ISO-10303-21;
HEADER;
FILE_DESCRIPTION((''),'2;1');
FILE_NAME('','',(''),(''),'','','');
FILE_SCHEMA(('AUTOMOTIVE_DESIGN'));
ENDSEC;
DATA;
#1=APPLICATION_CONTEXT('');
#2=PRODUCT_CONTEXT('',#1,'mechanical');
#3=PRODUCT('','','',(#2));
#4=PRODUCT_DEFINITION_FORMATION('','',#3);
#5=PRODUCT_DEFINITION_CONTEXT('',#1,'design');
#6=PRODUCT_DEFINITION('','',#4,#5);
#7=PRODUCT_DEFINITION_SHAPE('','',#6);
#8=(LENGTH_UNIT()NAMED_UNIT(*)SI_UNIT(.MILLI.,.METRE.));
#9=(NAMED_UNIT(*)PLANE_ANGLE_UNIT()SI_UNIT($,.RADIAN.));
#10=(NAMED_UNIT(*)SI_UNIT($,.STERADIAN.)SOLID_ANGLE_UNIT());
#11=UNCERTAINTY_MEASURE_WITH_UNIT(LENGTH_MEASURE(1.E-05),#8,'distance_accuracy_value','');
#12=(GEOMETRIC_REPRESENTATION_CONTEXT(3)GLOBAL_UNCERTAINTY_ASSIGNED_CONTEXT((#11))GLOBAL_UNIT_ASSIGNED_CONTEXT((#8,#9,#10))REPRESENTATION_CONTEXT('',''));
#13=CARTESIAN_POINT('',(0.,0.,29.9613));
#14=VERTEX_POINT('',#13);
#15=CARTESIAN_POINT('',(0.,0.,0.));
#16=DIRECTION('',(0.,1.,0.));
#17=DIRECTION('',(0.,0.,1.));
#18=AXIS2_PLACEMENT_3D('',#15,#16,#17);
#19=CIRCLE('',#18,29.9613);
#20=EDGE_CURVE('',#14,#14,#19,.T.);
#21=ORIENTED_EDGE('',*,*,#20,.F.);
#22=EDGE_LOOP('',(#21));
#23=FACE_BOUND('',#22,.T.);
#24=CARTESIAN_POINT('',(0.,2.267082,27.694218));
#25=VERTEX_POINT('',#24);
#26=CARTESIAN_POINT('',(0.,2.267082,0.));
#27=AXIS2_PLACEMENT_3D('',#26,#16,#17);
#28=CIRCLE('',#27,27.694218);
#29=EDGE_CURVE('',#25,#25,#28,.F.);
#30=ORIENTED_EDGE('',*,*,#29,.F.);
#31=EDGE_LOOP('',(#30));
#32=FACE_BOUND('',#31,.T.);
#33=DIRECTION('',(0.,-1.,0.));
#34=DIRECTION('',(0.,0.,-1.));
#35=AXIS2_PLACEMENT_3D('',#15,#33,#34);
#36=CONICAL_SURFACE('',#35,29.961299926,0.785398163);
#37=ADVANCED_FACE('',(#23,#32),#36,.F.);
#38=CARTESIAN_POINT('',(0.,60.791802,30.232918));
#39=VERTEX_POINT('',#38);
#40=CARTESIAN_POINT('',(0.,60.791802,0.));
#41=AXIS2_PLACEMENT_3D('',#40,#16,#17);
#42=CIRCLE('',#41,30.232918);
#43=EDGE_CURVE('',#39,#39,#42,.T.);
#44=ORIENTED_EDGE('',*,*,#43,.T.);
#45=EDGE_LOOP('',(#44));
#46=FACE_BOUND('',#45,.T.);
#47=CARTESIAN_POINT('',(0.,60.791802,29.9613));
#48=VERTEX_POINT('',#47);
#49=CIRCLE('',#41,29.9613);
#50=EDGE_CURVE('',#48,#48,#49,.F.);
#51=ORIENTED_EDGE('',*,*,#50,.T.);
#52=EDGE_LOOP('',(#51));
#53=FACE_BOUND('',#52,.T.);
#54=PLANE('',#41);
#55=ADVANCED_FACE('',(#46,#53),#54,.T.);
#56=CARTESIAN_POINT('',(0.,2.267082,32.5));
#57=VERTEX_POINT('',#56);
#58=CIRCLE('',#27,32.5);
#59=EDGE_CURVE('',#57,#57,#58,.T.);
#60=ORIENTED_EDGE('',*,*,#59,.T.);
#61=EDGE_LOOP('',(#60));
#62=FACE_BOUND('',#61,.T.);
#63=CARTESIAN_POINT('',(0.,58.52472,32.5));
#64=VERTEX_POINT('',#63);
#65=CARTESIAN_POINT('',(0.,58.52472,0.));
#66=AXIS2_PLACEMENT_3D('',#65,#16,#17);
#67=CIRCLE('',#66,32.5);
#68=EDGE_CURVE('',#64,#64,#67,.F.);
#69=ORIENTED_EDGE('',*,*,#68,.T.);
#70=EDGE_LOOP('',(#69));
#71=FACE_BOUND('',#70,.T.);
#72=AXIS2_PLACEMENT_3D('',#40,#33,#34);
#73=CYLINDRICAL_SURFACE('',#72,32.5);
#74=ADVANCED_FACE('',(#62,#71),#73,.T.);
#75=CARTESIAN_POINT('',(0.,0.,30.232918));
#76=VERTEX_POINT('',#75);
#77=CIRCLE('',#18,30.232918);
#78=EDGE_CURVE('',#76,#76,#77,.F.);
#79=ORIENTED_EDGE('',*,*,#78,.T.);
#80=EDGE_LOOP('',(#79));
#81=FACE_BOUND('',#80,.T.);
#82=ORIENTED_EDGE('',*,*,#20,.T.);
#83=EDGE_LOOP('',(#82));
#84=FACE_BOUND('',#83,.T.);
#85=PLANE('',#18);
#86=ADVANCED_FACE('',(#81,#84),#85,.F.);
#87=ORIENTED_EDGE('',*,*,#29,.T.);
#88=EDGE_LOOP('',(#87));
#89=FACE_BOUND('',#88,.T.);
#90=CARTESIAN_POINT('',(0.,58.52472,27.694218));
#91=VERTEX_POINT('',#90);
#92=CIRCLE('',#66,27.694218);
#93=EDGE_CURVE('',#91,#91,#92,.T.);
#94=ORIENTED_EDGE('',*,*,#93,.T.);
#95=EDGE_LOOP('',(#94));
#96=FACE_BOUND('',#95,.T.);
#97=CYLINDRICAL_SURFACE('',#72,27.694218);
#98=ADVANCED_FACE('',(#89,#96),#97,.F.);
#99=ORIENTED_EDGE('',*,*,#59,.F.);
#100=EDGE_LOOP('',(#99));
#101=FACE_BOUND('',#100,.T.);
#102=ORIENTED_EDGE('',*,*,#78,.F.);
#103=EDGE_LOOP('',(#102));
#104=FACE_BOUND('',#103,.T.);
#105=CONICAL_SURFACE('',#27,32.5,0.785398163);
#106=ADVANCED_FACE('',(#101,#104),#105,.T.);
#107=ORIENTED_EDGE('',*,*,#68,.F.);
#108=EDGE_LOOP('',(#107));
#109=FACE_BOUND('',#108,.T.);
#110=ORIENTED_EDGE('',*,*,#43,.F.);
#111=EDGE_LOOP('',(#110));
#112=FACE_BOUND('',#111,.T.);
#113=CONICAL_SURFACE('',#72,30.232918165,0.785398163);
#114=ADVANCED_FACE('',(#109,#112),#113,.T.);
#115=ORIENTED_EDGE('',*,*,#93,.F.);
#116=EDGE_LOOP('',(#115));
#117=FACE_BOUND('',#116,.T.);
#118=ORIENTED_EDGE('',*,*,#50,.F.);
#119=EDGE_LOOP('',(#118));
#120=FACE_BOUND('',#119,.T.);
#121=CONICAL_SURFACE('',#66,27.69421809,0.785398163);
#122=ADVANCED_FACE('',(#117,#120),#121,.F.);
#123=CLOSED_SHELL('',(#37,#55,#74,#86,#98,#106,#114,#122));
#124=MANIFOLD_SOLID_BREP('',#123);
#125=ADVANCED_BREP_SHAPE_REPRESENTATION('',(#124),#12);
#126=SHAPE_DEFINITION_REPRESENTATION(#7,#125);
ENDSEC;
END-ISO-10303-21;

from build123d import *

# Parameters (mm, degrees)
SKETCH1_R           = 32.5
BOSS_EXTRUDE1_DEPTH = 60.791801945
SKETCH2_R           = 27.69421809
CUT_EXTRUDE1_DEPTH  = 77.211174927
CHAMFER1_SIZE       = 2.267081835


with BuildPart() as part:
    # Sketch1 → Boss-Extrude1 (new body)
    with BuildSketch(Plane(origin=(0, 0, 0), x_dir=(1, 0, 0), z_dir=(0, 1, 0))):
        Circle(SKETCH1_R)
    extrude(amount=BOSS_EXTRUDE1_DEPTH)

    # Sketch2 → Cut-Extrude1 (cut, through all)
    with BuildSketch(Plane(origin=(0, 0, 0), x_dir=(1, 0, 0), z_dir=(0, 1, 0))):
        Circle(SKETCH2_R)
    extrude(amount=CUT_EXTRUDE1_DEPTH, mode=Mode.SUBTRACT)

    # Chamfer1
    chamfer1_edges = [part.edges().sort_by_distance(p)[0] for p in [
        (-27.69421809, 60.791801945, 0),
        (-27.69421809, 0, 0),
        (-32.5, 0, 0),
        (-32.5, 60.791801945, 0),
    ]]
    chamfer(chamfer1_edges, length=CHAMFER1_SIZE)


solid = part.part
